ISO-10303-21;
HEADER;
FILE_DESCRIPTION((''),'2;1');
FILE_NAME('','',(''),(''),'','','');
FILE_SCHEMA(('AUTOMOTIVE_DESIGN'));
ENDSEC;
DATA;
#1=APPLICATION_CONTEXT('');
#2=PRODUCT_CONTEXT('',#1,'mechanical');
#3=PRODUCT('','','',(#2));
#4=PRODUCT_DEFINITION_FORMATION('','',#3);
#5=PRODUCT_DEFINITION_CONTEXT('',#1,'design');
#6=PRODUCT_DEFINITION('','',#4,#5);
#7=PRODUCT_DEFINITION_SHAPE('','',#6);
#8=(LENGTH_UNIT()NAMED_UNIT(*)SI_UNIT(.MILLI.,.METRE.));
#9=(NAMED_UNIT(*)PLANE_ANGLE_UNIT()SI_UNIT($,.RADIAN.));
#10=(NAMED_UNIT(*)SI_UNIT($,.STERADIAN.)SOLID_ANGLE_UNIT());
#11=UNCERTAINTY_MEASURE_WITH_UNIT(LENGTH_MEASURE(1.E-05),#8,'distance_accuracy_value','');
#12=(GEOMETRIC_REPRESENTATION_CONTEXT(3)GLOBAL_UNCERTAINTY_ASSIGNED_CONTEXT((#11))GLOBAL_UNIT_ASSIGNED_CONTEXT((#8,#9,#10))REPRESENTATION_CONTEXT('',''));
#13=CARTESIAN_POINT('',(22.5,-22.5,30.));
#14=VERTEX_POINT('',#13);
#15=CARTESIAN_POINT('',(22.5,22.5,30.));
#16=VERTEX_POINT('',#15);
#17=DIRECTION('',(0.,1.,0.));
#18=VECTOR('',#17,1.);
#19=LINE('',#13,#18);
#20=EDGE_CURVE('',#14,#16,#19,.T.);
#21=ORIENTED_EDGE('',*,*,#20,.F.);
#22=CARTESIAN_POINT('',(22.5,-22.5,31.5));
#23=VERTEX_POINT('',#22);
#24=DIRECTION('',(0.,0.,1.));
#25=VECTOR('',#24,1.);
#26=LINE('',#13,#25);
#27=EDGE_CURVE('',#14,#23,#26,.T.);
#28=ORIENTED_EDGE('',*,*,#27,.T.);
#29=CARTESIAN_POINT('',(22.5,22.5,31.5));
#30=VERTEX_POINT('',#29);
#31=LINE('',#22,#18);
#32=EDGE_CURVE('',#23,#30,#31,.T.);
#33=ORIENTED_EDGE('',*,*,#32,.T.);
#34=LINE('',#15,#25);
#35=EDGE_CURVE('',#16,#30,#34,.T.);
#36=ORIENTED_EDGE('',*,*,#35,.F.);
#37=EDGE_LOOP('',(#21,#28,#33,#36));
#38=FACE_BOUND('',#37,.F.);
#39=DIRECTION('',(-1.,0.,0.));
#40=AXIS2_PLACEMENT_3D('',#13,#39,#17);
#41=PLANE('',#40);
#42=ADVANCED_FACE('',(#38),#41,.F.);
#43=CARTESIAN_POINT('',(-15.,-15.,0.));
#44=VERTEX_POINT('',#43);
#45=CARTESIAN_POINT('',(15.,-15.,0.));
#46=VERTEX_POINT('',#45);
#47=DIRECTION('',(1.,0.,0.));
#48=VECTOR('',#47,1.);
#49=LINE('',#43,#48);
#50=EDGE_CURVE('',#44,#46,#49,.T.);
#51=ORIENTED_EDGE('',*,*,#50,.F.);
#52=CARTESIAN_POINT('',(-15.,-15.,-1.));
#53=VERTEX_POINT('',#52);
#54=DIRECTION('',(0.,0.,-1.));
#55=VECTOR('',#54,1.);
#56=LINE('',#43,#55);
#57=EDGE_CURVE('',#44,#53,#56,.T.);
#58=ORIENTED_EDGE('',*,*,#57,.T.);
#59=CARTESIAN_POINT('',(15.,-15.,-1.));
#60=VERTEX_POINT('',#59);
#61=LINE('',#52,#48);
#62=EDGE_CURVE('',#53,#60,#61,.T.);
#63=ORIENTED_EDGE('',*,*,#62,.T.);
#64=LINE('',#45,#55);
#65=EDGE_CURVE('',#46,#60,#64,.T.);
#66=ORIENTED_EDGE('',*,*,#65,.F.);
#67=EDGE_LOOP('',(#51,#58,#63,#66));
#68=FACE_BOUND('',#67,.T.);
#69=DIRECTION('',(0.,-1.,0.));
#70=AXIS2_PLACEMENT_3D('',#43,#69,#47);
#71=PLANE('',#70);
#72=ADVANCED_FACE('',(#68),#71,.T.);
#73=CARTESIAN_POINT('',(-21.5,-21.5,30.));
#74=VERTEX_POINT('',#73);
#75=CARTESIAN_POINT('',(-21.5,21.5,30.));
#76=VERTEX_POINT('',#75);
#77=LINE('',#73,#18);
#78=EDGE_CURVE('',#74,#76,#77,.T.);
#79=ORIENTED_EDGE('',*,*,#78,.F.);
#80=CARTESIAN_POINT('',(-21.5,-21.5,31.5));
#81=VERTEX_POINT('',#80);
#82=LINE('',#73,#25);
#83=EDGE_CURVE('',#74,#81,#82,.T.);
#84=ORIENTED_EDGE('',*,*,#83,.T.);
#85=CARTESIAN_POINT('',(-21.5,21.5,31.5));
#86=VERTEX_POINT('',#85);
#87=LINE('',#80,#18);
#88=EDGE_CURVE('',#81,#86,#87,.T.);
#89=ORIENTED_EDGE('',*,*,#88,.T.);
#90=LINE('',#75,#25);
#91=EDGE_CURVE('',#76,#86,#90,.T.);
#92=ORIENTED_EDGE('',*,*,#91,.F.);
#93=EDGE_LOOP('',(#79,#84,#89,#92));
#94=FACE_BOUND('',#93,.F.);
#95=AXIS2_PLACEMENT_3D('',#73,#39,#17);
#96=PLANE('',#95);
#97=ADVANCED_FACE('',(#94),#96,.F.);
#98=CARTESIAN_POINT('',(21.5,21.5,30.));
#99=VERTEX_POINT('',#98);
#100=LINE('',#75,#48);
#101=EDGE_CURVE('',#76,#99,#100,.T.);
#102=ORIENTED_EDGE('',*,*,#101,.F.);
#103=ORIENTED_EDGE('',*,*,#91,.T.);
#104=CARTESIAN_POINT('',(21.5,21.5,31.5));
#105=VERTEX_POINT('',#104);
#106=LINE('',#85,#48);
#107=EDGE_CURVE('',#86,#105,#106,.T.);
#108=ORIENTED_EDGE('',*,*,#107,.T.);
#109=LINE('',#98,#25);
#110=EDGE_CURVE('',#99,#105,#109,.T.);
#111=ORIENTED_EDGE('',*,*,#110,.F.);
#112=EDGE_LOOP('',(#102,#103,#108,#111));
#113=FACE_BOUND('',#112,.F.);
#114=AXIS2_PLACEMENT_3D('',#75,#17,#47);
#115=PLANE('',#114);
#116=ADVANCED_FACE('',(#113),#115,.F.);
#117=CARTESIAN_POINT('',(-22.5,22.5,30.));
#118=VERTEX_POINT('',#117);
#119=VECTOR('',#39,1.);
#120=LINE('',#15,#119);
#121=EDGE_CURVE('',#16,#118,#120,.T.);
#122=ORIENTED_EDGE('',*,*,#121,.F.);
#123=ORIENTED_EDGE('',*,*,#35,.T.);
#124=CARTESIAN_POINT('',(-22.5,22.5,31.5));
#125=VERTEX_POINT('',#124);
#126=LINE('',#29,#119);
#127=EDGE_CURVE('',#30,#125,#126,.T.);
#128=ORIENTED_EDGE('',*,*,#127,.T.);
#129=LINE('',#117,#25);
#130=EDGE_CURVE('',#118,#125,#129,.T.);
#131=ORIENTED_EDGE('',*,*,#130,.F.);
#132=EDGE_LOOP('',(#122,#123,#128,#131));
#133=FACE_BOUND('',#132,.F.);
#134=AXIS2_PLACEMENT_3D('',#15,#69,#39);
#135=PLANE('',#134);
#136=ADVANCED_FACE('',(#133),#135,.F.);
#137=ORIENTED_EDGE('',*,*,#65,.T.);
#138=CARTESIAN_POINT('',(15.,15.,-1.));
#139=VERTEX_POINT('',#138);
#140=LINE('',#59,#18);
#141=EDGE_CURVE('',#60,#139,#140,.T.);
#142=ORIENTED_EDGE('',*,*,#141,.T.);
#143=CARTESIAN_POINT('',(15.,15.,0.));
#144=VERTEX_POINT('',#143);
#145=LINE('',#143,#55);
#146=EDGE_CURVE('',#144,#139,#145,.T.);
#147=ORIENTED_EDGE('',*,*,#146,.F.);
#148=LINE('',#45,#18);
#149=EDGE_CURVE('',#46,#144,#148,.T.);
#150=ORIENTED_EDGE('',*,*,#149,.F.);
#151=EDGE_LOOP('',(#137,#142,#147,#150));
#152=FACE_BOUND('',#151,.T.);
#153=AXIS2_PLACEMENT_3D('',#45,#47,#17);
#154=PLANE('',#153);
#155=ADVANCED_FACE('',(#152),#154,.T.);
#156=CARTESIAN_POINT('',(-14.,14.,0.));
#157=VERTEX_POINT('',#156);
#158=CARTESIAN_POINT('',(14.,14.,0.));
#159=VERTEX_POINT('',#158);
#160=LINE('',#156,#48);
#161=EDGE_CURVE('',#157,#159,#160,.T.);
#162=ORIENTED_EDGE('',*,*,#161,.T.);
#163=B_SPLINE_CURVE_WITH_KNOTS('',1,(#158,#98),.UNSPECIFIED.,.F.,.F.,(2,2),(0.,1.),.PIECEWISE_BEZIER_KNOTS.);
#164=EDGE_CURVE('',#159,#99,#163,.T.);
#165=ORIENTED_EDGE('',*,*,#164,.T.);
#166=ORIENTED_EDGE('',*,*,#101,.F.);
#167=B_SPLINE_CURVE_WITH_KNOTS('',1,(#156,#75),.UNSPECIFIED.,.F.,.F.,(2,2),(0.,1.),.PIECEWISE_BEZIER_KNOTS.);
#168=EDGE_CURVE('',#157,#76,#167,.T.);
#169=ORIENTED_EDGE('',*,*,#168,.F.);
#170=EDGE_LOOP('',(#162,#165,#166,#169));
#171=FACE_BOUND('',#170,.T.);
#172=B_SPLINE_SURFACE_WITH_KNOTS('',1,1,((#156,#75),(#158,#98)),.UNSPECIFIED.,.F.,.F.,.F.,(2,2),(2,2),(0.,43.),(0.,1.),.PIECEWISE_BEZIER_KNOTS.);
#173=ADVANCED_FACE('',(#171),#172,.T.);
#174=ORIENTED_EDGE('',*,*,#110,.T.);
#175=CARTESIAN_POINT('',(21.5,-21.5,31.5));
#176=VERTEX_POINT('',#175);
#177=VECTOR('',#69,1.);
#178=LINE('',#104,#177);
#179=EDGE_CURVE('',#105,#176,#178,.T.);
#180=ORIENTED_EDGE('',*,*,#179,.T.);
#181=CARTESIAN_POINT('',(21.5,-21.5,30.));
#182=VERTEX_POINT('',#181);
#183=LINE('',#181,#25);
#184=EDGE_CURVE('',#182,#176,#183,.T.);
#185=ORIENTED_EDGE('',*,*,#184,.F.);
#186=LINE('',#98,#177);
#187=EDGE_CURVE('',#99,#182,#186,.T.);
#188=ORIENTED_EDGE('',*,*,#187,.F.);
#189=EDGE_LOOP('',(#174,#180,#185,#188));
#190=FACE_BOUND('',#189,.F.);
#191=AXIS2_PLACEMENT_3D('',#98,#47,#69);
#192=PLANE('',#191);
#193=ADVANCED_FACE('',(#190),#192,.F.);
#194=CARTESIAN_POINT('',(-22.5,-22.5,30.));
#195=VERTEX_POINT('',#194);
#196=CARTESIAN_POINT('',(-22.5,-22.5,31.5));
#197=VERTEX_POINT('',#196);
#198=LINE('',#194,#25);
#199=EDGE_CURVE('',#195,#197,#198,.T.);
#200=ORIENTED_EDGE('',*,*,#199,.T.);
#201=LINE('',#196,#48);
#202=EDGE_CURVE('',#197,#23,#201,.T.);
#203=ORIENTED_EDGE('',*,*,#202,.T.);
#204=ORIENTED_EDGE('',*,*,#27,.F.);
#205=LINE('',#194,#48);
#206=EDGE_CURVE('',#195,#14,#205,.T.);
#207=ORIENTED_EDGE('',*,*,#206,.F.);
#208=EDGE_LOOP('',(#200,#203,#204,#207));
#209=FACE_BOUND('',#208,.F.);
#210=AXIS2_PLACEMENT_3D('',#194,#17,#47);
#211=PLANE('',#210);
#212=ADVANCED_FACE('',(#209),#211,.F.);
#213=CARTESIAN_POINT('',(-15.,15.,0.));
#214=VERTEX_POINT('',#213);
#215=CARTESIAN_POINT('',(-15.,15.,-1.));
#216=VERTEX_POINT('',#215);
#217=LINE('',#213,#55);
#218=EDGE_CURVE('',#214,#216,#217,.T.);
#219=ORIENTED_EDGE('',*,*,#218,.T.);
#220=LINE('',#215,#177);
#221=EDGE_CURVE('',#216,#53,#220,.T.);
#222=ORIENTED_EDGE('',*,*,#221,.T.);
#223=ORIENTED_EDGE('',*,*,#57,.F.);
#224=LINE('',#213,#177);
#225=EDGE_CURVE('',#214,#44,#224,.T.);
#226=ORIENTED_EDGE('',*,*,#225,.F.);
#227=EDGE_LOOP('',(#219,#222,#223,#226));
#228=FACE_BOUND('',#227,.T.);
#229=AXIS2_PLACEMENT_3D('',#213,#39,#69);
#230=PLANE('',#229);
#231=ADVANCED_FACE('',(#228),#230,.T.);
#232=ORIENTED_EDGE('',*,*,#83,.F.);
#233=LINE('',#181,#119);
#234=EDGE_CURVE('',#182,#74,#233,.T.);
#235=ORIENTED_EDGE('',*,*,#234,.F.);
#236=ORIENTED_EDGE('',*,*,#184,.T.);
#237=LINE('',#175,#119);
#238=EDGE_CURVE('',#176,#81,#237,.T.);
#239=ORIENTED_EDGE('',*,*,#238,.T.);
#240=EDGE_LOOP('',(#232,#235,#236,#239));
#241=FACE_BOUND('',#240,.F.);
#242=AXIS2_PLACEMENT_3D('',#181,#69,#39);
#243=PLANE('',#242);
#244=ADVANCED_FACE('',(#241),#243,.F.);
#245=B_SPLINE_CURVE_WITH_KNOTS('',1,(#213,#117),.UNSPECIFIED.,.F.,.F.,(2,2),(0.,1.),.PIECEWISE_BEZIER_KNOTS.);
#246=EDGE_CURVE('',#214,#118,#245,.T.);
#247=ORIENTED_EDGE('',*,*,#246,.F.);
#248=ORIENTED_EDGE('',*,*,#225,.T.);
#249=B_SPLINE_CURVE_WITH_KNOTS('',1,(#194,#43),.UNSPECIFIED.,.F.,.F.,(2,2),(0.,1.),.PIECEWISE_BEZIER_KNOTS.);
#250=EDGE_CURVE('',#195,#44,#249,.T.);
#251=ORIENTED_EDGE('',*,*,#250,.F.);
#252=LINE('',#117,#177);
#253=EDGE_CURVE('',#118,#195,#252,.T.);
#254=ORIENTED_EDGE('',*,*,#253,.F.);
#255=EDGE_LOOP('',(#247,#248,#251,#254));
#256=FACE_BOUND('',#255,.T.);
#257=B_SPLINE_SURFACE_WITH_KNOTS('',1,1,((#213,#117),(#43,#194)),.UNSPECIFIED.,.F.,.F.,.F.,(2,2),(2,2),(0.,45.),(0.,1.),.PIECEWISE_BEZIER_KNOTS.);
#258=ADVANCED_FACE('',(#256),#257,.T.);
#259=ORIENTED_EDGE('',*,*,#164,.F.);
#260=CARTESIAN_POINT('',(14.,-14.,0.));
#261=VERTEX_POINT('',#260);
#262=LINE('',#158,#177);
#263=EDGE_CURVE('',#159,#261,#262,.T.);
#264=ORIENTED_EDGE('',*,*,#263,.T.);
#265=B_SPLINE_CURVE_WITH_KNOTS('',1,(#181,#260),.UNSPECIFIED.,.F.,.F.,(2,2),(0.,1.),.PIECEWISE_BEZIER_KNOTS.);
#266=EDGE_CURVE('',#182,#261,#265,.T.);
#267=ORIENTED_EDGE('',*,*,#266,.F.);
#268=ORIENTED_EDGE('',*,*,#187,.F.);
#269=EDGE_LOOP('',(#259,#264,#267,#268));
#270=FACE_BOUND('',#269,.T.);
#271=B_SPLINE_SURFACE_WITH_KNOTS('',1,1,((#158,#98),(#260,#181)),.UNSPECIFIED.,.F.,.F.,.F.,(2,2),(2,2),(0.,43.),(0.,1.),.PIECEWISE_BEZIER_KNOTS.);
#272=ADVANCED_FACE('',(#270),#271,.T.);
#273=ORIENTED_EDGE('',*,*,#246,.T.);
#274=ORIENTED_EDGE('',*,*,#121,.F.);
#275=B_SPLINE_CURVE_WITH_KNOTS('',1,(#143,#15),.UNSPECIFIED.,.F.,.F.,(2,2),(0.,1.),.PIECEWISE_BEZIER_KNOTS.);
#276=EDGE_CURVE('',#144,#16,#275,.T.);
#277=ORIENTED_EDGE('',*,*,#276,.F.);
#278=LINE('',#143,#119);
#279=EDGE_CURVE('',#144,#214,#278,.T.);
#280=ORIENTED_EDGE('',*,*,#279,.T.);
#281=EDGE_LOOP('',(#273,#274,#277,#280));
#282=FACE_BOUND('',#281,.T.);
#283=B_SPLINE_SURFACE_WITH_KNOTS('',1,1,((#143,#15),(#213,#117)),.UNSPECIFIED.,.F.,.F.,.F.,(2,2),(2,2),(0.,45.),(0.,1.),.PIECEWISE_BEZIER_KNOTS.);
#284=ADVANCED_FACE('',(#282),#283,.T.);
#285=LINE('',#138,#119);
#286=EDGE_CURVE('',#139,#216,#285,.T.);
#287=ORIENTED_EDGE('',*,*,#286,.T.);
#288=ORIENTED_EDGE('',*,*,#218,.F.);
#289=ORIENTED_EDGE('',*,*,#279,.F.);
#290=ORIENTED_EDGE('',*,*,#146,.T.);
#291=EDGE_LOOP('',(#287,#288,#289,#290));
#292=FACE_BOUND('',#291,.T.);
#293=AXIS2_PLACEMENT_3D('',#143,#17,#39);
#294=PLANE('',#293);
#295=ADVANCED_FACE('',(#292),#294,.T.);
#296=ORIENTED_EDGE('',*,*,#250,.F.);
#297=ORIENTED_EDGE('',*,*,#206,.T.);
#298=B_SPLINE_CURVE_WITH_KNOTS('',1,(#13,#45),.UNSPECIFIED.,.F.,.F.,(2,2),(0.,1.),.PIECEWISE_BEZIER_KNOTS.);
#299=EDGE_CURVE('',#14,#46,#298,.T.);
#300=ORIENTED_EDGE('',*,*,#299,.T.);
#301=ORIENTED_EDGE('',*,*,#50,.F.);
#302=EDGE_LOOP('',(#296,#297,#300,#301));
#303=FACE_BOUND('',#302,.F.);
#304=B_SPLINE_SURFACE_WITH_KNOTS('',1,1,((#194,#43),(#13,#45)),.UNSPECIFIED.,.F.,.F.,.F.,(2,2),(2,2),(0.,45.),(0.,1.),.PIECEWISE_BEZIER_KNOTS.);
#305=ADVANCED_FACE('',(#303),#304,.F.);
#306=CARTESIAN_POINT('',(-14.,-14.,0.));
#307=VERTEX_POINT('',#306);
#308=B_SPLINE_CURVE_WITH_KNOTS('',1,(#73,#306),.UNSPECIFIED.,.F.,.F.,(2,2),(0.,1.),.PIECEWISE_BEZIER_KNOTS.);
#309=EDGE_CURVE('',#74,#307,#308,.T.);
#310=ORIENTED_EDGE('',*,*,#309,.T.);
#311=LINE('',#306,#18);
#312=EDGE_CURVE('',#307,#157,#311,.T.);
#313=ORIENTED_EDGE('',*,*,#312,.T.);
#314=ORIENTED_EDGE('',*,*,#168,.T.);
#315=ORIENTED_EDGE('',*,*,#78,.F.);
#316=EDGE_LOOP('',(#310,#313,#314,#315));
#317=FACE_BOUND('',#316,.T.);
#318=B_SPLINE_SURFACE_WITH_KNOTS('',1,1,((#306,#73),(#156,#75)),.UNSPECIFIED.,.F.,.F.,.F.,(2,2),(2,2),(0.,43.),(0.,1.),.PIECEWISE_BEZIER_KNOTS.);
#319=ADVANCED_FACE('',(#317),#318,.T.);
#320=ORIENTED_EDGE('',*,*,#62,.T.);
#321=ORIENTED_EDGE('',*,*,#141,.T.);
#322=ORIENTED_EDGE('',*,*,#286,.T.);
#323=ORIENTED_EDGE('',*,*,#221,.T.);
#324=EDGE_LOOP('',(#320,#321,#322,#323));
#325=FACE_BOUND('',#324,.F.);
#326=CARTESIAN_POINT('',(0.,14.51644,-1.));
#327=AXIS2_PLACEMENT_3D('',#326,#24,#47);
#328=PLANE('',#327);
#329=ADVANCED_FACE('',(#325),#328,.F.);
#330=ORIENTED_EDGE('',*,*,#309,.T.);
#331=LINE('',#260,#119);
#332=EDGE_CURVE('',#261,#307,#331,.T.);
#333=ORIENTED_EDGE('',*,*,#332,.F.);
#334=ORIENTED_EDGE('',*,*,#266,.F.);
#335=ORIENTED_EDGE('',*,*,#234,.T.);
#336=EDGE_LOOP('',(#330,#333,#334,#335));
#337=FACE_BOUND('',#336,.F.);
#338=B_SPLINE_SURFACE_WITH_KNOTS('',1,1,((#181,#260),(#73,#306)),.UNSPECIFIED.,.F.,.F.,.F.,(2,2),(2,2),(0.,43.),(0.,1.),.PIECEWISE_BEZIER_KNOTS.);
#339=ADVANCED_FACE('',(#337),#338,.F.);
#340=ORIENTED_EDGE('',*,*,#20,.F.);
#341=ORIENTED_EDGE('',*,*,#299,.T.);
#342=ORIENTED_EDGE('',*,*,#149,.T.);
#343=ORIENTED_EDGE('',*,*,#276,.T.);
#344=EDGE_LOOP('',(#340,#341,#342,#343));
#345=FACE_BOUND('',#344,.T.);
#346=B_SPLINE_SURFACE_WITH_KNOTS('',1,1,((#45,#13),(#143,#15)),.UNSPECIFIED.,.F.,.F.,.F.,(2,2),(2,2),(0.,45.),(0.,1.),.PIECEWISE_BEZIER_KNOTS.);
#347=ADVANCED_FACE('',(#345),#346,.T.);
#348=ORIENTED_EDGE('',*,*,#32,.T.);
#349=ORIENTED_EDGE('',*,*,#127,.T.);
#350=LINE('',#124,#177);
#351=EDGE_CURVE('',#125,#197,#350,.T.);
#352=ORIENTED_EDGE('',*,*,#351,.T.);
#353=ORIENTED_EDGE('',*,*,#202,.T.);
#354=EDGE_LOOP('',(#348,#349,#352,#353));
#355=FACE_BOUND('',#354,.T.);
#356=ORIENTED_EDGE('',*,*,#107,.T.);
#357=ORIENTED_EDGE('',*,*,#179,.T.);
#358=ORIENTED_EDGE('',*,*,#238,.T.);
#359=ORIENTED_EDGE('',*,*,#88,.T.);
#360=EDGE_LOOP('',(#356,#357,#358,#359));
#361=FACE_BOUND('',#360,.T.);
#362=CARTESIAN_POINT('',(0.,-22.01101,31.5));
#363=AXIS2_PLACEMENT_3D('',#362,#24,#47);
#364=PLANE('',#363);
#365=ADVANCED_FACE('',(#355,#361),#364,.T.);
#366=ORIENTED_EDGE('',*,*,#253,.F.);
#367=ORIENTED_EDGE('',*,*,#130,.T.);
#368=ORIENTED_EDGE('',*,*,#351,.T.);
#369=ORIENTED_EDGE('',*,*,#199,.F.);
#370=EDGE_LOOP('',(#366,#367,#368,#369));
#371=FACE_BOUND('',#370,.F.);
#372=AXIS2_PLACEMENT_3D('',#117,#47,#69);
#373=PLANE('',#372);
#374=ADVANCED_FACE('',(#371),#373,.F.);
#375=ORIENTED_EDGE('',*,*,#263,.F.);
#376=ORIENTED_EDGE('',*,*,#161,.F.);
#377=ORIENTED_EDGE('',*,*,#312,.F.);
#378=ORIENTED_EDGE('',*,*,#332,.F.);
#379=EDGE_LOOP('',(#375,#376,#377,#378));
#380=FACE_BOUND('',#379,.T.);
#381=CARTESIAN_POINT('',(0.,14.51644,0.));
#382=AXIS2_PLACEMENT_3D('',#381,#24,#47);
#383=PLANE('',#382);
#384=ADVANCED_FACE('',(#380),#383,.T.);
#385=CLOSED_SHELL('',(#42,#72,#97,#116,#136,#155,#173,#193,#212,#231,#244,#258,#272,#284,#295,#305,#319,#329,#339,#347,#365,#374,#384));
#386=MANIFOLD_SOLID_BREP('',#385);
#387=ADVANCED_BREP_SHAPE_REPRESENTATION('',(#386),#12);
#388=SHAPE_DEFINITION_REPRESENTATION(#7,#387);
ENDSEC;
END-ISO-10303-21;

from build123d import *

# Parameters (mm, degrees)
F0_W     = 28
F0_H     = 28
F7_DEPTH = 1
F8_DEPTH = 1.5


with BuildPart() as f3:
    # F2 (on offset) → F3 section 0
    with BuildSketch(Plane.XY.offset(30)):
        Polygon((22.5, -22.5), (21.5, -21.5), (-21.5, -21.5), (-22.5, -22.5), align=None)
    # F0 (on Top) → F3 section 1
    with BuildSketch(Plane.XY):
        Polygon((15, -15), (14, -14), (-14, -14), (-15, -15), align=None)
    loft()

    # F0 (on Top) → F4 section 0
    with BuildSketch(Plane.XY):
        Polygon((14, 14), (14, -14), (15, -15), (15, 15), align=None)
    # F2 (on offset) → F4 section 1
    with BuildSketch(Plane.XY.offset(30)):
        Polygon((21.5, 21.5), (21.5, -21.5), (22.5, -22.5), (22.5, 22.5), align=None)
    loft()

    # F0 (on Top) → F5 section 0
    with BuildSketch(Plane.XY):
        Polygon((-14, 14), (14, 14), (15, 15), (-15, 15), align=None)
    # F2 (on offset) → F5 section 1
    with BuildSketch(Plane.XY.offset(30)):
        Polygon((-21.5, 21.5), (21.5, 21.5), (22.5, 22.5), (-22.5, 22.5), align=None)
    loft()

    # F0 (on Top) → F6 section 0
    with BuildSketch(Plane.XY):
        Polygon((-15, -15), (-14, -14), (-14, 14), (-15, 15), align=None)
    # F2 (on offset) → F6 section 1
    with BuildSketch(Plane.XY.offset(30)):
        Polygon((-22.5, -22.5), (-21.5, -21.5), (-21.5, 21.5), (-22.5, 22.5), align=None)
    loft()

    # F0 (on Top) → F7 (join)
    with BuildSketch(Plane.XY):
        Polygon((-14, 14), (14, 14), (15, 15), (-15, 15), align=None)
        Polygon((-15, -15), (-14, -14), (-14, 14), (-15, 15), align=None)
        Polygon((15, -15), (14, -14), (-14, -14), (-15, -15), align=None)
        Polygon((14, 14), (14, -14), (15, -15), (15, 15), align=None)
        Rectangle(F0_W, F0_H)
    extrude(amount=-F7_DEPTH)

    # F2 (on offset) → F8 (join)
    with BuildSketch(Plane.XY.offset(30)):
        Polygon((22.5, -22.5), (21.5, -21.5), (-21.5, -21.5), (-22.5, -22.5), align=None)
        Polygon((21.5, 21.5), (21.5, -21.5), (22.5, -22.5), (22.5, 22.5), align=None)
        Polygon((-21.5, 21.5), (21.5, 21.5), (22.5, 22.5), (-22.5, 22.5), align=None)
        Polygon((-22.5, -22.5), (-21.5, -21.5), (-21.5, 21.5), (-22.5, 22.5), align=None)
    extrude(amount=F8_DEPTH)


solid = f3.part
